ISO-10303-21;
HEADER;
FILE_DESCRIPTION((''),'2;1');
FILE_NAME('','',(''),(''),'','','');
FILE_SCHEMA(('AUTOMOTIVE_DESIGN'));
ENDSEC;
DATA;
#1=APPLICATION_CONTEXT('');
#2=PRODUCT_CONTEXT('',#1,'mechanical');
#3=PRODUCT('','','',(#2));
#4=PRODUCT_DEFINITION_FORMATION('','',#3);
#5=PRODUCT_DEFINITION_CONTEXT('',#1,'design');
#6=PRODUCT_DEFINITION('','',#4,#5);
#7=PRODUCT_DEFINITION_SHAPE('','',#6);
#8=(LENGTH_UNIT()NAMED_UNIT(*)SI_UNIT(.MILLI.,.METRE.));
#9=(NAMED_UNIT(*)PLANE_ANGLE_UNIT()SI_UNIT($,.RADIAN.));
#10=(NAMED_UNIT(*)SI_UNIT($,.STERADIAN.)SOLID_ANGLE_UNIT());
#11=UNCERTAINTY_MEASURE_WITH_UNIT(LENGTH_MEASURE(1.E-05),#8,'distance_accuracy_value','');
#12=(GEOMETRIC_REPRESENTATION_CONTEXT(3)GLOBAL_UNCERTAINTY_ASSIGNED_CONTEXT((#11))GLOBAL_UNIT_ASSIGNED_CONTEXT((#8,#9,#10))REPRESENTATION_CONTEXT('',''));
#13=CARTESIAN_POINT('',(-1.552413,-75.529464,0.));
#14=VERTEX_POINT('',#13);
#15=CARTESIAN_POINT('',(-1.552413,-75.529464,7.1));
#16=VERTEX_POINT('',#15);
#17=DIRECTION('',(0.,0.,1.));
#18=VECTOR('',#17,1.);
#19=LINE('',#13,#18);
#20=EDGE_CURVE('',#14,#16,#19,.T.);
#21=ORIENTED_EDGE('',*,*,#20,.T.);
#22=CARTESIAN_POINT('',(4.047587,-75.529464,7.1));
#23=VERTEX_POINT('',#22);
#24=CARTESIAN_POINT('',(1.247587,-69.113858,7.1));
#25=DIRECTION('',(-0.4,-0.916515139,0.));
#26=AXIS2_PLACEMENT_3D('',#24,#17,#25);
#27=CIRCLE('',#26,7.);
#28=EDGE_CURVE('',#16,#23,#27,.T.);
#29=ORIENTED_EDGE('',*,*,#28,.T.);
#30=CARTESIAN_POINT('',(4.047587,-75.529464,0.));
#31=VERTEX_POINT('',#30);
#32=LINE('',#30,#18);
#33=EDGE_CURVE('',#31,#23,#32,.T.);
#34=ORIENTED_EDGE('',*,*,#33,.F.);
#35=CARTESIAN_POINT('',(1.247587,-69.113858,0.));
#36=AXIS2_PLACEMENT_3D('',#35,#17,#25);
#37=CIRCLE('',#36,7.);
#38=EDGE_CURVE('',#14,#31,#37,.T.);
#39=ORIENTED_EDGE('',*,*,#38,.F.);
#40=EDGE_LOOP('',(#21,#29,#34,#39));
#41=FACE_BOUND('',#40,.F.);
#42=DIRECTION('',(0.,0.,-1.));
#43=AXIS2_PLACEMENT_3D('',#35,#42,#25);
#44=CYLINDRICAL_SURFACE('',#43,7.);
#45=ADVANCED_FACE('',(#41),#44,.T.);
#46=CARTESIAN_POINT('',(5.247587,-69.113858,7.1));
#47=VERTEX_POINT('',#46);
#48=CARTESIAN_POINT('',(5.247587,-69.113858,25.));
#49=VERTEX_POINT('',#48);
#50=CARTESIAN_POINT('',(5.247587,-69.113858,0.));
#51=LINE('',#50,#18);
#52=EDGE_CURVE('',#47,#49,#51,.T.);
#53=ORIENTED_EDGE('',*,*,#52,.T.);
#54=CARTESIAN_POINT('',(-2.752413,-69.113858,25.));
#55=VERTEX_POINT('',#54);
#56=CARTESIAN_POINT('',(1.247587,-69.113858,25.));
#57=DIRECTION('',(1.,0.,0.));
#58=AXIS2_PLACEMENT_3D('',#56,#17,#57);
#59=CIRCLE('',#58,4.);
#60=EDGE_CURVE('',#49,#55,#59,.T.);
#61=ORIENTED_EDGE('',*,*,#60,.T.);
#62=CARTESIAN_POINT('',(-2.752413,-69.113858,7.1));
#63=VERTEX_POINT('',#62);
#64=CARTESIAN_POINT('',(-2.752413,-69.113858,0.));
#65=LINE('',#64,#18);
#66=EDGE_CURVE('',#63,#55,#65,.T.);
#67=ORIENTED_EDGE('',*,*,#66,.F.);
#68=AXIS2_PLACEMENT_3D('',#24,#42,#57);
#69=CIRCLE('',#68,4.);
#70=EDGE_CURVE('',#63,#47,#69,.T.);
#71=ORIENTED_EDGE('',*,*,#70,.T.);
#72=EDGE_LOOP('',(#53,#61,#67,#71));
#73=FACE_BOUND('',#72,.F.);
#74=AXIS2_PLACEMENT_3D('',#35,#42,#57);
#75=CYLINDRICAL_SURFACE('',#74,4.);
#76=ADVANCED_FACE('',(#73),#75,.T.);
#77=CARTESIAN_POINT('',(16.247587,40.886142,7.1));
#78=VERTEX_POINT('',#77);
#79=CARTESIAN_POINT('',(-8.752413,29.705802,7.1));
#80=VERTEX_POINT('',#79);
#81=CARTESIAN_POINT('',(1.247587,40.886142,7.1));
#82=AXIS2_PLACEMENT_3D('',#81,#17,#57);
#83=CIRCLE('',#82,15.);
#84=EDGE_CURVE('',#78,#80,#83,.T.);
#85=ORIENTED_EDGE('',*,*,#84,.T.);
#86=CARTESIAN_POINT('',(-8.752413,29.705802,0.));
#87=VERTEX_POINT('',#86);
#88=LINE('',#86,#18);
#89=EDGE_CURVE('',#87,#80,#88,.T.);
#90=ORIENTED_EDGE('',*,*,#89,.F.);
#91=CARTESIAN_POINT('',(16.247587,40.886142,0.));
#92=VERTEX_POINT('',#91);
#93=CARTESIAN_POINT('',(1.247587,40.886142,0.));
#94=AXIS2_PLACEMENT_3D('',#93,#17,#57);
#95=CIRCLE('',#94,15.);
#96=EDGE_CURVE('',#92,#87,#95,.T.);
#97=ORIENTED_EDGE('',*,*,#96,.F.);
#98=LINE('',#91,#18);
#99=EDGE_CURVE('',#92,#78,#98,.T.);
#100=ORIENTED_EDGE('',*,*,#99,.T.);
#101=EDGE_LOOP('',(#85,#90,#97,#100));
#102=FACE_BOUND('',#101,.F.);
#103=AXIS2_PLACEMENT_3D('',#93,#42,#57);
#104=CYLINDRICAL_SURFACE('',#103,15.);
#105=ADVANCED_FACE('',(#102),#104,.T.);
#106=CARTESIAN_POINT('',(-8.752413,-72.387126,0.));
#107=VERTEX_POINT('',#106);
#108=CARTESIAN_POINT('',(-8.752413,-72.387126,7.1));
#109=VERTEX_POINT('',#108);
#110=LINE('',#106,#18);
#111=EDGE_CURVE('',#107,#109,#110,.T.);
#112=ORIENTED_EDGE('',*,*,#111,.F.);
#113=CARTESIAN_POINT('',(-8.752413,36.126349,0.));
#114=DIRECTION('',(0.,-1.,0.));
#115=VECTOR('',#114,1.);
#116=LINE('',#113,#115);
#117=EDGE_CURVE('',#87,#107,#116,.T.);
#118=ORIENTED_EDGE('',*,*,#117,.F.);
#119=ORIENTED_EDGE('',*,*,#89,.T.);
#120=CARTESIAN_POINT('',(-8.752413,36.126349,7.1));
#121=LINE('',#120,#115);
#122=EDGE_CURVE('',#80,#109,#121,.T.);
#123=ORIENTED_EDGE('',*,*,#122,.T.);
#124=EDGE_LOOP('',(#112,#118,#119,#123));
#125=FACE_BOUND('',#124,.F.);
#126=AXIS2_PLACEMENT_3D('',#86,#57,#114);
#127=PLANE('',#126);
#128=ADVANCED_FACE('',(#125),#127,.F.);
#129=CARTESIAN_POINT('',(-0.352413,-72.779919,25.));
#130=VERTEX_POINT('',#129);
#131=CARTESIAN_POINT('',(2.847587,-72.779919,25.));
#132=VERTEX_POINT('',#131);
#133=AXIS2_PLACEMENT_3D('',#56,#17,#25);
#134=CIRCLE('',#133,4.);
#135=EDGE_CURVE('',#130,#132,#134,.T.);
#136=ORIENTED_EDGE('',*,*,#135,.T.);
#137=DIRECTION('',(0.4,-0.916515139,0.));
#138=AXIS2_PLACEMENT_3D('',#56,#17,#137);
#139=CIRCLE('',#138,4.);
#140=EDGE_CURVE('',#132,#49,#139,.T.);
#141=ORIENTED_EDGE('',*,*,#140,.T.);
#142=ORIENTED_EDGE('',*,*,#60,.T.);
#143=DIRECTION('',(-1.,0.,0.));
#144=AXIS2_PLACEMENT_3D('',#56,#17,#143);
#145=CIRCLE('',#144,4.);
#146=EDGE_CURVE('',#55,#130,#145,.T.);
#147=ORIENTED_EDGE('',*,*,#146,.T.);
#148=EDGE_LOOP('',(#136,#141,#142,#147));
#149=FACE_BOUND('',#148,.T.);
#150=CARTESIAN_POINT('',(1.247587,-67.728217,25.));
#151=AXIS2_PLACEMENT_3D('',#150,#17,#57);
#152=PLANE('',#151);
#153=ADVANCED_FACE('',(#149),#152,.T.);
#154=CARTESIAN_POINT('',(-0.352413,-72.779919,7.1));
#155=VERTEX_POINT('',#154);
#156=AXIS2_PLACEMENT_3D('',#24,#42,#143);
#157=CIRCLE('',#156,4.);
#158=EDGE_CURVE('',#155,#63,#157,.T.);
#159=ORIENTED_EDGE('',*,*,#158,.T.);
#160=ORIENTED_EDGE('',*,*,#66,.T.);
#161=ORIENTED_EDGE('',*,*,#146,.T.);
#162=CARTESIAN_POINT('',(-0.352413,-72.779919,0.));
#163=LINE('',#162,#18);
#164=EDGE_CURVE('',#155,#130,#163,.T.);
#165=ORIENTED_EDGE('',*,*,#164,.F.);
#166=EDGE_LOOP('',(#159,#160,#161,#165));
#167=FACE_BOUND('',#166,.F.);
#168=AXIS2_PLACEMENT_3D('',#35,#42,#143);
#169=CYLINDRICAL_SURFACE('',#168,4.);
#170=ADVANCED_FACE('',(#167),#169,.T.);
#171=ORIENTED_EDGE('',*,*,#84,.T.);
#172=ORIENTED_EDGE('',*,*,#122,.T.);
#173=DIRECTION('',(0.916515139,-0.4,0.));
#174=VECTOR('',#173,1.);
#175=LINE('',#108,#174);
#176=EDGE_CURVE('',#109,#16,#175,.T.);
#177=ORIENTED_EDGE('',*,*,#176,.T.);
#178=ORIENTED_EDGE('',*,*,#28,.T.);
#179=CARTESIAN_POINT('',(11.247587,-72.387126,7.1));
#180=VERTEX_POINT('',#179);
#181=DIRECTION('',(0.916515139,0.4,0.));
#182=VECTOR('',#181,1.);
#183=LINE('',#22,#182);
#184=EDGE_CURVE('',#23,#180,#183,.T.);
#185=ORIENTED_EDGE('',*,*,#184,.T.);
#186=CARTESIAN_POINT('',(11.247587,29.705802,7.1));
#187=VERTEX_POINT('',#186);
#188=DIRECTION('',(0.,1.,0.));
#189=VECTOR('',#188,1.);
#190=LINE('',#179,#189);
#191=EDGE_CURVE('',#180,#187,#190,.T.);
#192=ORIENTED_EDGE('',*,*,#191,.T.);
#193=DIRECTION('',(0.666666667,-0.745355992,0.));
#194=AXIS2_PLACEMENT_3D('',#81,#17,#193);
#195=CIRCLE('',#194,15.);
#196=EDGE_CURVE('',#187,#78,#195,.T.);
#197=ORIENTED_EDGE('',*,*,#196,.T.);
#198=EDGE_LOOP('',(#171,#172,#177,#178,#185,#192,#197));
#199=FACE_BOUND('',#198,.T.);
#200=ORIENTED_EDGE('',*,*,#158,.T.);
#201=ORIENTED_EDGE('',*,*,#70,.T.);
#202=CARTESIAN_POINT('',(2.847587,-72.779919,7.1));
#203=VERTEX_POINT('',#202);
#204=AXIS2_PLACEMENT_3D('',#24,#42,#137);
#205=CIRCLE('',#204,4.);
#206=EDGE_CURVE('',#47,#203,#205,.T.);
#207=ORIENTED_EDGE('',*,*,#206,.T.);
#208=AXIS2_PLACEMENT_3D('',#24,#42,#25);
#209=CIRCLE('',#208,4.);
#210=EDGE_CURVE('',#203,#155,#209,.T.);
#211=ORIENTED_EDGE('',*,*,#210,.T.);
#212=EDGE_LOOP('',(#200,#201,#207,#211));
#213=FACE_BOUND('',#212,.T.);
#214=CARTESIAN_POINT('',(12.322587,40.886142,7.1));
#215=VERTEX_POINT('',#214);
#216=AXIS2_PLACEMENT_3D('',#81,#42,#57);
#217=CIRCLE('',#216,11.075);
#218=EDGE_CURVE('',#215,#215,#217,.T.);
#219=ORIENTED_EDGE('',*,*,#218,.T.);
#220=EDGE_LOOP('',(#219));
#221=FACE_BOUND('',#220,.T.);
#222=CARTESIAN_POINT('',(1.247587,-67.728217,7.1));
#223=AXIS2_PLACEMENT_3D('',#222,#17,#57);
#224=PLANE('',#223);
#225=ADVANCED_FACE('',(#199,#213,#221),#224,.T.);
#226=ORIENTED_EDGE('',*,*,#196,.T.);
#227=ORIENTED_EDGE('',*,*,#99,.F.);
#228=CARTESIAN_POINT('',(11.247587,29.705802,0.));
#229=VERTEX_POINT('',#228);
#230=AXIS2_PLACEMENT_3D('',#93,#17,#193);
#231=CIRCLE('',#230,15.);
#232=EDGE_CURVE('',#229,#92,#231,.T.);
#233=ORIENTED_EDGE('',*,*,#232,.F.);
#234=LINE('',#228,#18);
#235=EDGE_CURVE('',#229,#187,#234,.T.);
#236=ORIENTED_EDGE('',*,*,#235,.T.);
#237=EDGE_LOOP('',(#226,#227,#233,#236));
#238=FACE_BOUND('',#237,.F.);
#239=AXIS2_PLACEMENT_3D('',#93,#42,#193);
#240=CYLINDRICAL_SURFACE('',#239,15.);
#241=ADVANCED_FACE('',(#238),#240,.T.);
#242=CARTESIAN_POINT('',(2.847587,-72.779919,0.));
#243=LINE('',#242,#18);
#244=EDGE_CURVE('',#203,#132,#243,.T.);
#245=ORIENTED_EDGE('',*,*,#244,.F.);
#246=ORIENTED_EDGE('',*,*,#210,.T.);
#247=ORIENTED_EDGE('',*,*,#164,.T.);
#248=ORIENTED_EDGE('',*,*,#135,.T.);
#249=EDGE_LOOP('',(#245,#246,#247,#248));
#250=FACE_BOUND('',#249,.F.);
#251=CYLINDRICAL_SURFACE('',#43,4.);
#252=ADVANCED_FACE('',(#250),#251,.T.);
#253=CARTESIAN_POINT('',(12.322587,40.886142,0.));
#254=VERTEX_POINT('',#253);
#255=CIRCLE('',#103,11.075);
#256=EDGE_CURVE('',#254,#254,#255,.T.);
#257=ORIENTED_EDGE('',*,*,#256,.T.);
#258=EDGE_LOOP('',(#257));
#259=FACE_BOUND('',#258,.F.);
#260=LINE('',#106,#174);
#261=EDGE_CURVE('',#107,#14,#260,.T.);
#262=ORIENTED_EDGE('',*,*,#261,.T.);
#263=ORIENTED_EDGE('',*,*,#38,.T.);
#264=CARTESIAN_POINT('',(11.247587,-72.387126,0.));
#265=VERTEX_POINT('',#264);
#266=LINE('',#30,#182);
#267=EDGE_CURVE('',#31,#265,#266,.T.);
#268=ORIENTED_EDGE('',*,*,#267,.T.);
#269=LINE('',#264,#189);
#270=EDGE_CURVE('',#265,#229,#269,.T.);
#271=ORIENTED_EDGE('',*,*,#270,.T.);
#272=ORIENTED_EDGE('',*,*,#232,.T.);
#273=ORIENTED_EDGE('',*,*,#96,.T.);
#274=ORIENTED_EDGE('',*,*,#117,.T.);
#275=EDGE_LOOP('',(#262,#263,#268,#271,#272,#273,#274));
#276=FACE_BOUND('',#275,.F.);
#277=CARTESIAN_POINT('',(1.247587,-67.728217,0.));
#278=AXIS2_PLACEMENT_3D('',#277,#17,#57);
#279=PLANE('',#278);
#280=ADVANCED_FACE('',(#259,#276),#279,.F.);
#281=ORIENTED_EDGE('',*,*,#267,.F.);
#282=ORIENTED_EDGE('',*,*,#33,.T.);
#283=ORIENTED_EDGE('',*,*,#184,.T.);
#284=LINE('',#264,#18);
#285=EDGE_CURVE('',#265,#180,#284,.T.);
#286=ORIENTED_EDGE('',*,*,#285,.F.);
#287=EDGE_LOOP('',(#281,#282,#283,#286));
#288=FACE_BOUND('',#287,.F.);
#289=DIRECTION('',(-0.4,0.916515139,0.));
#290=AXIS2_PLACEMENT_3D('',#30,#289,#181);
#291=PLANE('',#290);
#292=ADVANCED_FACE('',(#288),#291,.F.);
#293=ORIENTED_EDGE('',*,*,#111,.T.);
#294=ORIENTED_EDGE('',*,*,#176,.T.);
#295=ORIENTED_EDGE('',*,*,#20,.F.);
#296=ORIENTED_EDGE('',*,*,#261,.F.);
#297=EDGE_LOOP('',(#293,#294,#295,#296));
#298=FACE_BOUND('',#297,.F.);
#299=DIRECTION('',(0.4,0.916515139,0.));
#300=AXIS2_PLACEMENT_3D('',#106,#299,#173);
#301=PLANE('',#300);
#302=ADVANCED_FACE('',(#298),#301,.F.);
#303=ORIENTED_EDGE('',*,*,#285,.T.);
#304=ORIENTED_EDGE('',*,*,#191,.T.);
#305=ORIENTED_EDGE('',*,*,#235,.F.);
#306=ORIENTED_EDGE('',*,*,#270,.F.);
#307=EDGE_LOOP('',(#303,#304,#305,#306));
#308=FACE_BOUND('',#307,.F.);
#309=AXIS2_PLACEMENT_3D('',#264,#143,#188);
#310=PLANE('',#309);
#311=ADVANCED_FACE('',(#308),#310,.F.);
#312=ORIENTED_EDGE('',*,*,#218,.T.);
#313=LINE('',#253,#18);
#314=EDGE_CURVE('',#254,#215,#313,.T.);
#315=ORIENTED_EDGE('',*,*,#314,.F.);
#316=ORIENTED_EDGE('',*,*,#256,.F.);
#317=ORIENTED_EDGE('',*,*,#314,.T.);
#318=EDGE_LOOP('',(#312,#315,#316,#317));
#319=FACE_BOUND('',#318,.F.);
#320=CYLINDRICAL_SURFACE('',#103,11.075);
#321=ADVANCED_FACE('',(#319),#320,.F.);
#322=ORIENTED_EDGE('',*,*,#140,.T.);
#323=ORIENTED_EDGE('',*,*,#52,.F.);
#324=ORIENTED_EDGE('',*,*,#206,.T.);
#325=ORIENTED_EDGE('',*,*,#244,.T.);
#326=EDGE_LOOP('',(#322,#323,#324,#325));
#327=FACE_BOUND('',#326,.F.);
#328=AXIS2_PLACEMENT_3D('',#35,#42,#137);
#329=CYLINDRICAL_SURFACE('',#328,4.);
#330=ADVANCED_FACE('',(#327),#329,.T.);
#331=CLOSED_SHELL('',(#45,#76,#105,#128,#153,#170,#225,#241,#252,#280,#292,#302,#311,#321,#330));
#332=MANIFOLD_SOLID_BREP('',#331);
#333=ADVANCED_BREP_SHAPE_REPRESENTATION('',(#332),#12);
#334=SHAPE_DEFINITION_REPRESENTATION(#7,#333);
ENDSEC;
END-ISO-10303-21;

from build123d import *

# Parameters (mm, degrees)
F1_DEPTH = 7.1
F2_DEPTH = 25


with BuildPart() as f1:
    # F0 (on Top) → F1 (new body)
    with BuildSketch(Plane.XY):
        with BuildLine():
            Line((-2.752413094, -69.1138580441), (1.247586906, -69.1138580441))
            Line((1.247586906, -69.1138580441), (5.247586906, -69.1138580441))
            ThreePointArc((5.247586906, -69.1138580441), (1.247586906, -65.1138580441), (-2.752413094, -69.1138580441))
        make_face()
        with BuildLine():
            Line((5.247586906, -69.1138580441), (1.247586906, -69.1138580441))
            Line((1.247586906, -69.1138580441), (-2.752413094, -69.1138580441))
            ThreePointArc((-2.752413094, -69.1138580441), (-2.0990532002, -71.3047482742), (-0.352413094, -72.7799186001))
            ThreePointArc((-0.352413094, -72.7799186001), (1.247586906, -73.1138580441), (2.847586906, -72.7799186001))
            ThreePointArc((2.847586906, -72.7799186001), (4.5942270121, -71.3047482742), (5.247586906, -69.1138580441))
        make_face()
        with BuildLine():
            ThreePointArc((-2.752413094, -69.1138580441), (1.247586906, -65.1138580441), (5.247586906, -69.1138580441))
            Line((5.247586906, -69.1138580441), (8.247586906, -69.1138580441))
            ThreePointArc((8.247586906, -69.1138580441), (1.247586906, -62.1138580441), (-5.752413094, -69.1138580441))
            Line((-5.752413094, -69.1138580441), (-2.752413094, -69.1138580441))
        make_face()
        with BuildLine():
            Line((8.247586906, -69.1138580441), (5.247586906, -69.1138580441))
            ThreePointArc((5.247586906, -69.1138580441), (4.5942270121, -71.3047482742), (2.847586906, -72.7799186001))
            Line((2.847586906, -72.7799186001), (8.1125655384, -70.4820935415))
            ThreePointArc((8.1125655384, -70.4820935415), (8.2137497819, -69.8012987954), (8.247586906, -69.1138580441))
        make_face()
        with BuildLine():
            ThreePointArc((-0.352413094, -72.7799186001), (-2.0990532002, -71.3047482742), (-2.752413094, -69.1138580441))
            Line((-2.752413094, -69.1138580441), (-5.752413094, -69.1138580441))
            ThreePointArc((-5.752413094, -69.1138580441), (-5.7185759699, -69.8012987954), (-5.6173917265, -70.4820935415))
            Line((-5.6173917265, -70.4820935415), (-0.352413094, -72.7799186001))
        make_face()
        with BuildLine():
            ThreePointArc((-5.752413094, -69.1138580441), (1.247586906, -62.1138580441), (8.247586906, -69.1138580441))
            Line((8.247586906, -69.1138580441), (11.247586906, -69.1138580441))
            Line((11.247586906, -69.1138580441), (11.247586906, 29.7058020684))
            ThreePointArc((11.247586906, 29.7058020684), (1.247586906, 25.8861419559), (-8.752413094, 29.7058020684))
            Line((-8.752413094, 29.7058020684), (-8.752413094, -69.1138580441))
            Line((-8.752413094, -69.1138580441), (-5.752413094, -69.1138580441))
        make_face()
        with BuildLine():
            Line((11.247586906, -69.1138580441), (8.247586906, -69.1138580441))
            ThreePointArc((8.247586906, -69.1138580441), (8.2137497819, -69.8012987954), (8.1125655384, -70.4820935415))
            Line((8.1125655384, -70.4820935415), (11.247586906, -69.1138580441))
        make_face()
        with BuildLine():
            Line((8.1125655384, -70.4820935415), (2.847586906, -72.7799186001))
            ThreePointArc((2.847586906, -72.7799186001), (1.247586906, -73.1138580441), (-0.352413094, -72.7799186001))
            Line((-0.352413094, -72.7799186001), (-5.6173917265, -70.4820935415))
            ThreePointArc((-5.6173917265, -70.4820935415), (-4.2041963042, -73.5045367877), (-1.552413094, -75.5294640171))
            ThreePointArc((-1.552413094, -75.5294640171), (1.247586906, -76.1138580441), (4.047586906, -75.5294640171))
            ThreePointArc((4.047586906, -75.5294640171), (6.6993701161, -73.5045367877), (8.1125655384, -70.4820935415))
        make_face()
        with BuildLine():
            ThreePointArc((-5.6173917265, -70.4820935415), (-5.7185759699, -69.8012987954), (-5.752413094, -69.1138580441))
            Line((-5.752413094, -69.1138580441), (-8.752413094, -69.1138580441))
            Line((-8.752413094, -69.1138580441), (-5.6173917265, -70.4820935415))
        make_face()
        with BuildLine():
            Line((11.247586906, -72.3871263977), (11.247586906, -69.1138580441))
            Line((11.247586906, -69.1138580441), (8.1125655384, -70.4820935415))
            ThreePointArc((8.1125655384, -70.4820935415), (6.6993701161, -73.5045367877), (4.047586906, -75.5294640171))
            Line((4.047586906, -75.5294640171), (11.247586906, -72.3871263977))
        make_face()
        with BuildLine():
            Line((-5.6173917265, -70.4820935415), (-8.752413094, -69.1138580441))
            Line((-8.752413094, -69.1138580441), (-8.752413094, -72.3871263977))
            Line((-8.752413094, -72.3871263977), (-1.552413094, -75.5294640171))
            ThreePointArc((-1.552413094, -75.5294640171), (-4.2041963042, -73.5045367877), (-5.6173917265, -70.4820935415))
        make_face()
        with BuildLine():
            ThreePointArc((-8.752413094, 29.7058020684), (1.247586906, 25.8861419559), (11.247586906, 29.7058020684))
            Line((11.247586906, 29.7058020684), (11.247586906, 36.1263494184))
            ThreePointArc((11.247586906, 36.1263494184), (1.247586906, 29.8111419559), (-8.752413094, 36.1263494184))
            Line((-8.752413094, 36.1263494184), (-8.752413094, 29.7058020684))
        make_face()
        with BuildLine():
            Line((11.247586906, 36.1263494184), (11.247586906, 29.7058020684))
            ThreePointArc((11.247586906, 29.7058020684), (14.9406508436, 34.7624175989), (16.247586906, 40.8861419559))
            ThreePointArc((16.247586906, 40.8861419559), (-4.876137451, 54.5792058935), (-8.752413094, 29.7058020684))
            Line((-8.752413094, 29.7058020684), (-8.752413094, 36.1263494184))
            ThreePointArc((-8.752413094, 36.1263494184), (-1.1922517158, 51.6890495506), (12.322586906, 40.8861419559))
            ThreePointArc((12.322586906, 40.8861419559), (12.0504945007, 38.4463033341), (11.247586906, 36.1263494184))
        make_face()
    extrude(amount=F1_DEPTH)

    # F0 (on Top) → F2 (join)
    with BuildSketch(Plane.XY):
        with BuildLine():
            Line((-2.752413094, -69.1138580441), (1.247586906, -69.1138580441))
            Line((1.247586906, -69.1138580441), (5.247586906, -69.1138580441))
            ThreePointArc((5.247586906, -69.1138580441), (1.247586906, -65.1138580441), (-2.752413094, -69.1138580441))
        make_face()
        with BuildLine():
            Line((5.247586906, -69.1138580441), (1.247586906, -69.1138580441))
            Line((1.247586906, -69.1138580441), (-2.752413094, -69.1138580441))
            ThreePointArc((-2.752413094, -69.1138580441), (-2.0990532002, -71.3047482742), (-0.352413094, -72.7799186001))
            ThreePointArc((-0.352413094, -72.7799186001), (1.247586906, -73.1138580441), (2.847586906, -72.7799186001))
            ThreePointArc((2.847586906, -72.7799186001), (4.5942270121, -71.3047482742), (5.247586906, -69.1138580441))
        make_face()
    extrude(amount=F2_DEPTH)


solid = f1.part
